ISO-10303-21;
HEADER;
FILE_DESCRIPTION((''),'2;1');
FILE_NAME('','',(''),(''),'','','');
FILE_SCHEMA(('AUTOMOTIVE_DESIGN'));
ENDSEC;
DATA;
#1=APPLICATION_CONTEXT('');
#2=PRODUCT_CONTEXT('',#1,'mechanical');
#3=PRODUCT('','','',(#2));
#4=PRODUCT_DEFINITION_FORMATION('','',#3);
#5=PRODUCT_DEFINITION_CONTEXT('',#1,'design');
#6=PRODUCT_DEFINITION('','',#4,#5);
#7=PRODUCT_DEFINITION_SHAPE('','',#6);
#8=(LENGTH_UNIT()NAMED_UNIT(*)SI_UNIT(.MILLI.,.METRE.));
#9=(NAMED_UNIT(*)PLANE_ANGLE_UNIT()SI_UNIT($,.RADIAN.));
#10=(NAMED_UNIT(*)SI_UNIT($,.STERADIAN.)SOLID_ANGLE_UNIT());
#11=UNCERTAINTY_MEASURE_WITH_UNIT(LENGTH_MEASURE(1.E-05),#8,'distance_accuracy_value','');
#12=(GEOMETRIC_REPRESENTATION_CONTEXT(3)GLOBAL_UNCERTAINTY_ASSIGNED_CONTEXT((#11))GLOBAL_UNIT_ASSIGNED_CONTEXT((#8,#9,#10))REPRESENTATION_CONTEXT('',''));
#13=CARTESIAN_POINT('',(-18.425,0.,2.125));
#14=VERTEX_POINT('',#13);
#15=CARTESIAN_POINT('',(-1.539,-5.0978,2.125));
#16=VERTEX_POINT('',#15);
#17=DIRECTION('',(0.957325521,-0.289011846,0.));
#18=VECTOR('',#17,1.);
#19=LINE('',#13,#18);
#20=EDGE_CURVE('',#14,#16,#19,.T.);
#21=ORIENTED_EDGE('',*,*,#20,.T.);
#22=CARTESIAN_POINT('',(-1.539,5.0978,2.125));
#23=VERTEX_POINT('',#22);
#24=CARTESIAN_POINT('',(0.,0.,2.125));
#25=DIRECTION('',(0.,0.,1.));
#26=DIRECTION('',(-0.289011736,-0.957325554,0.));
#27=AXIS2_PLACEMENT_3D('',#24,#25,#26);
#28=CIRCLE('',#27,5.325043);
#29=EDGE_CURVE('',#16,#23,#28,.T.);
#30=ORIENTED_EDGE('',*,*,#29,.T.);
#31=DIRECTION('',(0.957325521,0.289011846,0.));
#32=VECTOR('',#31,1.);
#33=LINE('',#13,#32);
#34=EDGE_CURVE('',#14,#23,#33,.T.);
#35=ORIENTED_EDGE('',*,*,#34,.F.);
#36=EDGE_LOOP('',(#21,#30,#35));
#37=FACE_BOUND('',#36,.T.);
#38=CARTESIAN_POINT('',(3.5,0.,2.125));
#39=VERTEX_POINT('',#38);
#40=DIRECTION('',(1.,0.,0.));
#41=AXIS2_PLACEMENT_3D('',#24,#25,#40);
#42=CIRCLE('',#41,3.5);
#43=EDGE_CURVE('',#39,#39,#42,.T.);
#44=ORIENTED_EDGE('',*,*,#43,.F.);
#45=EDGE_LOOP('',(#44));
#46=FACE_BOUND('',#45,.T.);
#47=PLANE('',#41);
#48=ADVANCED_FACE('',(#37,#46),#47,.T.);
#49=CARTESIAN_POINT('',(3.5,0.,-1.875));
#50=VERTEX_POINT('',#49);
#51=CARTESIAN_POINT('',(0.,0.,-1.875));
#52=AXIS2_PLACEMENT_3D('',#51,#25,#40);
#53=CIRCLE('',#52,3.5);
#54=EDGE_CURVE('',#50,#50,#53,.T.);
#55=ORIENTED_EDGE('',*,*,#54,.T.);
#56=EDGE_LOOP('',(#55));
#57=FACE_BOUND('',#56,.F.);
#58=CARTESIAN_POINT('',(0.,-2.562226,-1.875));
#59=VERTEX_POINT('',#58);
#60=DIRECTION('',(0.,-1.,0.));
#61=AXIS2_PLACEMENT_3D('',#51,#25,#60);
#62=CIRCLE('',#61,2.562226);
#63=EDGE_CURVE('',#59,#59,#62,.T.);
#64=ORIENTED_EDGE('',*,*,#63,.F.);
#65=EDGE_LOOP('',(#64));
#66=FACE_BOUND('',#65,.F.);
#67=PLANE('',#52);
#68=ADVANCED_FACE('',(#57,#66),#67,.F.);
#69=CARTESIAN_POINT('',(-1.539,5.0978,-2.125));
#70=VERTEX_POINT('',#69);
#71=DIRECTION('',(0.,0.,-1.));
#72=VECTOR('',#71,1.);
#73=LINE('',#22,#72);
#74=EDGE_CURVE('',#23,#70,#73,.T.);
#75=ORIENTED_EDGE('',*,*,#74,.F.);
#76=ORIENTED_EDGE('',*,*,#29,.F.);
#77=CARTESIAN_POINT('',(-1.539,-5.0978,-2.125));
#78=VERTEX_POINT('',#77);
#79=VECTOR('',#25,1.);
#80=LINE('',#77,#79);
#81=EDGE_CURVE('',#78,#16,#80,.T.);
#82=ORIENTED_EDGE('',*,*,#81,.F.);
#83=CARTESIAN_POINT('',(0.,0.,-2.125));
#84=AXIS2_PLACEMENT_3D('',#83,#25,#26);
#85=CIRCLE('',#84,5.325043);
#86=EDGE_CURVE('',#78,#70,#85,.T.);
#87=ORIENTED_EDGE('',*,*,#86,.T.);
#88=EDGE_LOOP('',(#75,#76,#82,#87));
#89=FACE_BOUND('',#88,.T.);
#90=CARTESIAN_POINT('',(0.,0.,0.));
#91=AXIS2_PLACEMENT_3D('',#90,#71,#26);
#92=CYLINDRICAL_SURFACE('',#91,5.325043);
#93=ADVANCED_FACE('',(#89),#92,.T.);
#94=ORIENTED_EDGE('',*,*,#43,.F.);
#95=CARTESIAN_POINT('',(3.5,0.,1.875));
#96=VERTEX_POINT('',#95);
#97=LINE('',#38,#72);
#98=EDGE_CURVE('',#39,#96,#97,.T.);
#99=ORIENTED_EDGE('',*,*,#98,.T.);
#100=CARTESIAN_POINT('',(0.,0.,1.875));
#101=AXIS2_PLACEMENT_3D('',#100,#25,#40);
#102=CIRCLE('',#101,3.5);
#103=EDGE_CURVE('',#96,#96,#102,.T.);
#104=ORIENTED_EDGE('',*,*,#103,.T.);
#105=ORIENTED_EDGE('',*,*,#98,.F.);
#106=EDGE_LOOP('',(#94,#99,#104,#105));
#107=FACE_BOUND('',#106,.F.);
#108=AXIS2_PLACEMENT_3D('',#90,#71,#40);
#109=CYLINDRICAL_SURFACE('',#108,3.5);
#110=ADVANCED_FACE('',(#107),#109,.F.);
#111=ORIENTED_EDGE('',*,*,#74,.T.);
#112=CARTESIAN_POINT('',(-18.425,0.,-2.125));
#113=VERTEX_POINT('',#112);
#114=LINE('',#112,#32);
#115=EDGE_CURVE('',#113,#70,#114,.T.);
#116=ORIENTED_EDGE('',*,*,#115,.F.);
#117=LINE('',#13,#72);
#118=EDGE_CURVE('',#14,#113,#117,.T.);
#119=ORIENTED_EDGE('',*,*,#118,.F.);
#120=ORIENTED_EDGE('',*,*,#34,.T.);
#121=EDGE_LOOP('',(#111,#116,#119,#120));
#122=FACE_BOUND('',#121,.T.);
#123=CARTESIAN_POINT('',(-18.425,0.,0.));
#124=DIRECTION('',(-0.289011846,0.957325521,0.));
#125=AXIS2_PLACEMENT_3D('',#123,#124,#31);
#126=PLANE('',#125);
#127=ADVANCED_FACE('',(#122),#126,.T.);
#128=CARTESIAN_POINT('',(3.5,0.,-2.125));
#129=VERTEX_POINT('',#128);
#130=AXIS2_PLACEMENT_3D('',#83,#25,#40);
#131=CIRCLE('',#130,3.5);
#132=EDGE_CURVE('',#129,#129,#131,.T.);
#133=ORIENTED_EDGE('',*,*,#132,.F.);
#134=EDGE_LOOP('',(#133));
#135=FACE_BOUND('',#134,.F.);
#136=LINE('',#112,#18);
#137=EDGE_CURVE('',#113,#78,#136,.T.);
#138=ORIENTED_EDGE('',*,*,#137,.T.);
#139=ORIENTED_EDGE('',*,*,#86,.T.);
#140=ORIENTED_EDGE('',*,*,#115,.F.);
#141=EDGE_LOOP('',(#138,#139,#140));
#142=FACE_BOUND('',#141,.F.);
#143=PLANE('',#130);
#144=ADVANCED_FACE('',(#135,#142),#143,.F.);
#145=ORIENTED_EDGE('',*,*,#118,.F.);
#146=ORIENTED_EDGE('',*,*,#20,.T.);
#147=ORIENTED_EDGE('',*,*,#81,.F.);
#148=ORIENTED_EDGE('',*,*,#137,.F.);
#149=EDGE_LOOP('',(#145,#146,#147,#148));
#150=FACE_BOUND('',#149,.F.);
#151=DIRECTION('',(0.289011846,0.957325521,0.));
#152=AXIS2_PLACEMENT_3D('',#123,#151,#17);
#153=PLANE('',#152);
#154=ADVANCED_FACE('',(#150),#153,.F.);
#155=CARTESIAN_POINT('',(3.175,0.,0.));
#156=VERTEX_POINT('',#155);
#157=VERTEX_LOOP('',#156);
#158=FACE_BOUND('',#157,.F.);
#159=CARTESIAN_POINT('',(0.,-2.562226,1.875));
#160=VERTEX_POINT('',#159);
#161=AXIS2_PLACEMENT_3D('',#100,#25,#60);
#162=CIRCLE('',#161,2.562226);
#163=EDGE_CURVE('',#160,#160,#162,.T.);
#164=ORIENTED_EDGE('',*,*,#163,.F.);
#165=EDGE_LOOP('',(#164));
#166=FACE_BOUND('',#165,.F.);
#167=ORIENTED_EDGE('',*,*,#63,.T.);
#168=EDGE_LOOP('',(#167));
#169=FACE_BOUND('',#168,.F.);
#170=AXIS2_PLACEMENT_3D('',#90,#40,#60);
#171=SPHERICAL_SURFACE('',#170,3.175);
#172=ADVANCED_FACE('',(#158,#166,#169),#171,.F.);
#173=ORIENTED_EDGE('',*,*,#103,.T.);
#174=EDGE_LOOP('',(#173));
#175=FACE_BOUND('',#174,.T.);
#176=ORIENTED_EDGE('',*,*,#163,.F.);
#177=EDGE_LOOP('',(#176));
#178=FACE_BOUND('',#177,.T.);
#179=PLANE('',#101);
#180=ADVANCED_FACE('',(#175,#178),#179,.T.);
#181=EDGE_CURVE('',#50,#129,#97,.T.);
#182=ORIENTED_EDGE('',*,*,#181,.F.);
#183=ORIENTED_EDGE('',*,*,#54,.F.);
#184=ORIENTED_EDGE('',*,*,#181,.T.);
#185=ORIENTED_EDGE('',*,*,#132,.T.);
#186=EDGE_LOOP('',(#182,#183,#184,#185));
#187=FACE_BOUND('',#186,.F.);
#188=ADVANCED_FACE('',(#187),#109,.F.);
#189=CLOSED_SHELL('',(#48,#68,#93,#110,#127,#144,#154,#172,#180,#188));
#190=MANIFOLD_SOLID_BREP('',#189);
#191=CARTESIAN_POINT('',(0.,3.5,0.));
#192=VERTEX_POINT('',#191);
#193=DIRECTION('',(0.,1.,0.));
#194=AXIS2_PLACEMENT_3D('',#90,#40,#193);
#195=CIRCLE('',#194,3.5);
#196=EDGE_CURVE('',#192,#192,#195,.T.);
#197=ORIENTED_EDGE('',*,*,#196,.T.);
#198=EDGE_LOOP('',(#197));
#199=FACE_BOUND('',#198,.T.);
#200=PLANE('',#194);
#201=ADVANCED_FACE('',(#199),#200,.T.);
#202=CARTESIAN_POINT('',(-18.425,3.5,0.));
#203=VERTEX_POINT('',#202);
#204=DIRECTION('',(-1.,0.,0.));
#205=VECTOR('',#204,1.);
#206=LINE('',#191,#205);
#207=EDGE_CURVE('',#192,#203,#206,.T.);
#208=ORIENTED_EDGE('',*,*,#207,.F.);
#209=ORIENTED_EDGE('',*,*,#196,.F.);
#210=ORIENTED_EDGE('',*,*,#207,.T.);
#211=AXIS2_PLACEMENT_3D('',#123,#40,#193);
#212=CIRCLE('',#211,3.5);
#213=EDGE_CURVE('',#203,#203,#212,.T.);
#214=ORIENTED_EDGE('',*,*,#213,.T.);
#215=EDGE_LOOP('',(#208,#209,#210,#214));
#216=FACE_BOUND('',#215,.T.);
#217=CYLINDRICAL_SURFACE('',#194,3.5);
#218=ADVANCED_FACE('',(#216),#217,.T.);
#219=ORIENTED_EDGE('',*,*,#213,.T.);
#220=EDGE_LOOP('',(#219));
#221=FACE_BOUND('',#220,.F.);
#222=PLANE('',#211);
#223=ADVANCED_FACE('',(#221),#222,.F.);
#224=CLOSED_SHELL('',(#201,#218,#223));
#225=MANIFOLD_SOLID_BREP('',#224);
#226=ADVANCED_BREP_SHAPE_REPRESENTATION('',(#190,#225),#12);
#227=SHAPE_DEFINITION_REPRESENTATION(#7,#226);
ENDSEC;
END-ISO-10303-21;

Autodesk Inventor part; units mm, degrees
ref_plane "YZ Plane" through (0, 0, 0) normal (1, 0, 0) x (0, 1, 0)
ref_plane "XZ Plane" through (0, 0, 0) normal (0, 1, 0) x (-1, 0, 0)
ref_plane "XY Plane" through (0, 0, 0) normal (0, 0, 1) x (1, 0, 0)
sketch "Sketch1" plane through (0, 0, 0) normal (0, 0, 1) x (1, 0, 0)
  arc A0 (-1.539, -5.0978) -> (-1.539, 5.0978) centre (0, 0) ccw
  line L0 (-18.425, 0) -> (-1.539, -5.0978)
  line L1 (-18.425, 0) -> (-1.539, 5.0978)
  circle A1 centre (0, 0) radius 3.5
  dimension "d0" = 10.65
  dimension "d2" = 7
extrude "Extrusion1" add sketch "Sketch1" along normal mid plane 4.25
sketch "Sketch2" plane through (0, 0, 0) normal (0, 0, 1) x (1, 0, 0)
  circle A0 centre (0, 0) radius 3.5
  dimension "d5" = 7
extrude "Extrusion2" add sketch "Sketch2" along normal mid plane 3.75
sketch "Sketch3" plane through (0, 0, 0) normal (0, 0, 1) x (1, 0, 0)
  circle A0 centre (0, 0) radius 3.175
  line L0 (0, 0) -> (0, -3.7497)
  line L1 (0, -3.7497) -> (0, 0)
  line L2 (0, -0.8126) -> (0, 3.6567)
  line L3 (3.175, 0) -> (-3.175, 0)
  dimension "d8" = 6.35
revolve "Revolution1" cut sketch "Sketch3" angle 360 about axis through (3.175, 0, 0) along (-1, 0, 0) contours A0 L0 L3 | A0 L3 L0
sketch "Sketch4" plane through (0, 0, 0) normal (1, 0, 0) x (0, 1, 0)
  circle A0 centre (0, 0) radius 3.5
  dimension "d10" = 7
extrude "Extrusion3" add sketch "Sketch4" against normal up to surface (18.425 mm away) separate body
